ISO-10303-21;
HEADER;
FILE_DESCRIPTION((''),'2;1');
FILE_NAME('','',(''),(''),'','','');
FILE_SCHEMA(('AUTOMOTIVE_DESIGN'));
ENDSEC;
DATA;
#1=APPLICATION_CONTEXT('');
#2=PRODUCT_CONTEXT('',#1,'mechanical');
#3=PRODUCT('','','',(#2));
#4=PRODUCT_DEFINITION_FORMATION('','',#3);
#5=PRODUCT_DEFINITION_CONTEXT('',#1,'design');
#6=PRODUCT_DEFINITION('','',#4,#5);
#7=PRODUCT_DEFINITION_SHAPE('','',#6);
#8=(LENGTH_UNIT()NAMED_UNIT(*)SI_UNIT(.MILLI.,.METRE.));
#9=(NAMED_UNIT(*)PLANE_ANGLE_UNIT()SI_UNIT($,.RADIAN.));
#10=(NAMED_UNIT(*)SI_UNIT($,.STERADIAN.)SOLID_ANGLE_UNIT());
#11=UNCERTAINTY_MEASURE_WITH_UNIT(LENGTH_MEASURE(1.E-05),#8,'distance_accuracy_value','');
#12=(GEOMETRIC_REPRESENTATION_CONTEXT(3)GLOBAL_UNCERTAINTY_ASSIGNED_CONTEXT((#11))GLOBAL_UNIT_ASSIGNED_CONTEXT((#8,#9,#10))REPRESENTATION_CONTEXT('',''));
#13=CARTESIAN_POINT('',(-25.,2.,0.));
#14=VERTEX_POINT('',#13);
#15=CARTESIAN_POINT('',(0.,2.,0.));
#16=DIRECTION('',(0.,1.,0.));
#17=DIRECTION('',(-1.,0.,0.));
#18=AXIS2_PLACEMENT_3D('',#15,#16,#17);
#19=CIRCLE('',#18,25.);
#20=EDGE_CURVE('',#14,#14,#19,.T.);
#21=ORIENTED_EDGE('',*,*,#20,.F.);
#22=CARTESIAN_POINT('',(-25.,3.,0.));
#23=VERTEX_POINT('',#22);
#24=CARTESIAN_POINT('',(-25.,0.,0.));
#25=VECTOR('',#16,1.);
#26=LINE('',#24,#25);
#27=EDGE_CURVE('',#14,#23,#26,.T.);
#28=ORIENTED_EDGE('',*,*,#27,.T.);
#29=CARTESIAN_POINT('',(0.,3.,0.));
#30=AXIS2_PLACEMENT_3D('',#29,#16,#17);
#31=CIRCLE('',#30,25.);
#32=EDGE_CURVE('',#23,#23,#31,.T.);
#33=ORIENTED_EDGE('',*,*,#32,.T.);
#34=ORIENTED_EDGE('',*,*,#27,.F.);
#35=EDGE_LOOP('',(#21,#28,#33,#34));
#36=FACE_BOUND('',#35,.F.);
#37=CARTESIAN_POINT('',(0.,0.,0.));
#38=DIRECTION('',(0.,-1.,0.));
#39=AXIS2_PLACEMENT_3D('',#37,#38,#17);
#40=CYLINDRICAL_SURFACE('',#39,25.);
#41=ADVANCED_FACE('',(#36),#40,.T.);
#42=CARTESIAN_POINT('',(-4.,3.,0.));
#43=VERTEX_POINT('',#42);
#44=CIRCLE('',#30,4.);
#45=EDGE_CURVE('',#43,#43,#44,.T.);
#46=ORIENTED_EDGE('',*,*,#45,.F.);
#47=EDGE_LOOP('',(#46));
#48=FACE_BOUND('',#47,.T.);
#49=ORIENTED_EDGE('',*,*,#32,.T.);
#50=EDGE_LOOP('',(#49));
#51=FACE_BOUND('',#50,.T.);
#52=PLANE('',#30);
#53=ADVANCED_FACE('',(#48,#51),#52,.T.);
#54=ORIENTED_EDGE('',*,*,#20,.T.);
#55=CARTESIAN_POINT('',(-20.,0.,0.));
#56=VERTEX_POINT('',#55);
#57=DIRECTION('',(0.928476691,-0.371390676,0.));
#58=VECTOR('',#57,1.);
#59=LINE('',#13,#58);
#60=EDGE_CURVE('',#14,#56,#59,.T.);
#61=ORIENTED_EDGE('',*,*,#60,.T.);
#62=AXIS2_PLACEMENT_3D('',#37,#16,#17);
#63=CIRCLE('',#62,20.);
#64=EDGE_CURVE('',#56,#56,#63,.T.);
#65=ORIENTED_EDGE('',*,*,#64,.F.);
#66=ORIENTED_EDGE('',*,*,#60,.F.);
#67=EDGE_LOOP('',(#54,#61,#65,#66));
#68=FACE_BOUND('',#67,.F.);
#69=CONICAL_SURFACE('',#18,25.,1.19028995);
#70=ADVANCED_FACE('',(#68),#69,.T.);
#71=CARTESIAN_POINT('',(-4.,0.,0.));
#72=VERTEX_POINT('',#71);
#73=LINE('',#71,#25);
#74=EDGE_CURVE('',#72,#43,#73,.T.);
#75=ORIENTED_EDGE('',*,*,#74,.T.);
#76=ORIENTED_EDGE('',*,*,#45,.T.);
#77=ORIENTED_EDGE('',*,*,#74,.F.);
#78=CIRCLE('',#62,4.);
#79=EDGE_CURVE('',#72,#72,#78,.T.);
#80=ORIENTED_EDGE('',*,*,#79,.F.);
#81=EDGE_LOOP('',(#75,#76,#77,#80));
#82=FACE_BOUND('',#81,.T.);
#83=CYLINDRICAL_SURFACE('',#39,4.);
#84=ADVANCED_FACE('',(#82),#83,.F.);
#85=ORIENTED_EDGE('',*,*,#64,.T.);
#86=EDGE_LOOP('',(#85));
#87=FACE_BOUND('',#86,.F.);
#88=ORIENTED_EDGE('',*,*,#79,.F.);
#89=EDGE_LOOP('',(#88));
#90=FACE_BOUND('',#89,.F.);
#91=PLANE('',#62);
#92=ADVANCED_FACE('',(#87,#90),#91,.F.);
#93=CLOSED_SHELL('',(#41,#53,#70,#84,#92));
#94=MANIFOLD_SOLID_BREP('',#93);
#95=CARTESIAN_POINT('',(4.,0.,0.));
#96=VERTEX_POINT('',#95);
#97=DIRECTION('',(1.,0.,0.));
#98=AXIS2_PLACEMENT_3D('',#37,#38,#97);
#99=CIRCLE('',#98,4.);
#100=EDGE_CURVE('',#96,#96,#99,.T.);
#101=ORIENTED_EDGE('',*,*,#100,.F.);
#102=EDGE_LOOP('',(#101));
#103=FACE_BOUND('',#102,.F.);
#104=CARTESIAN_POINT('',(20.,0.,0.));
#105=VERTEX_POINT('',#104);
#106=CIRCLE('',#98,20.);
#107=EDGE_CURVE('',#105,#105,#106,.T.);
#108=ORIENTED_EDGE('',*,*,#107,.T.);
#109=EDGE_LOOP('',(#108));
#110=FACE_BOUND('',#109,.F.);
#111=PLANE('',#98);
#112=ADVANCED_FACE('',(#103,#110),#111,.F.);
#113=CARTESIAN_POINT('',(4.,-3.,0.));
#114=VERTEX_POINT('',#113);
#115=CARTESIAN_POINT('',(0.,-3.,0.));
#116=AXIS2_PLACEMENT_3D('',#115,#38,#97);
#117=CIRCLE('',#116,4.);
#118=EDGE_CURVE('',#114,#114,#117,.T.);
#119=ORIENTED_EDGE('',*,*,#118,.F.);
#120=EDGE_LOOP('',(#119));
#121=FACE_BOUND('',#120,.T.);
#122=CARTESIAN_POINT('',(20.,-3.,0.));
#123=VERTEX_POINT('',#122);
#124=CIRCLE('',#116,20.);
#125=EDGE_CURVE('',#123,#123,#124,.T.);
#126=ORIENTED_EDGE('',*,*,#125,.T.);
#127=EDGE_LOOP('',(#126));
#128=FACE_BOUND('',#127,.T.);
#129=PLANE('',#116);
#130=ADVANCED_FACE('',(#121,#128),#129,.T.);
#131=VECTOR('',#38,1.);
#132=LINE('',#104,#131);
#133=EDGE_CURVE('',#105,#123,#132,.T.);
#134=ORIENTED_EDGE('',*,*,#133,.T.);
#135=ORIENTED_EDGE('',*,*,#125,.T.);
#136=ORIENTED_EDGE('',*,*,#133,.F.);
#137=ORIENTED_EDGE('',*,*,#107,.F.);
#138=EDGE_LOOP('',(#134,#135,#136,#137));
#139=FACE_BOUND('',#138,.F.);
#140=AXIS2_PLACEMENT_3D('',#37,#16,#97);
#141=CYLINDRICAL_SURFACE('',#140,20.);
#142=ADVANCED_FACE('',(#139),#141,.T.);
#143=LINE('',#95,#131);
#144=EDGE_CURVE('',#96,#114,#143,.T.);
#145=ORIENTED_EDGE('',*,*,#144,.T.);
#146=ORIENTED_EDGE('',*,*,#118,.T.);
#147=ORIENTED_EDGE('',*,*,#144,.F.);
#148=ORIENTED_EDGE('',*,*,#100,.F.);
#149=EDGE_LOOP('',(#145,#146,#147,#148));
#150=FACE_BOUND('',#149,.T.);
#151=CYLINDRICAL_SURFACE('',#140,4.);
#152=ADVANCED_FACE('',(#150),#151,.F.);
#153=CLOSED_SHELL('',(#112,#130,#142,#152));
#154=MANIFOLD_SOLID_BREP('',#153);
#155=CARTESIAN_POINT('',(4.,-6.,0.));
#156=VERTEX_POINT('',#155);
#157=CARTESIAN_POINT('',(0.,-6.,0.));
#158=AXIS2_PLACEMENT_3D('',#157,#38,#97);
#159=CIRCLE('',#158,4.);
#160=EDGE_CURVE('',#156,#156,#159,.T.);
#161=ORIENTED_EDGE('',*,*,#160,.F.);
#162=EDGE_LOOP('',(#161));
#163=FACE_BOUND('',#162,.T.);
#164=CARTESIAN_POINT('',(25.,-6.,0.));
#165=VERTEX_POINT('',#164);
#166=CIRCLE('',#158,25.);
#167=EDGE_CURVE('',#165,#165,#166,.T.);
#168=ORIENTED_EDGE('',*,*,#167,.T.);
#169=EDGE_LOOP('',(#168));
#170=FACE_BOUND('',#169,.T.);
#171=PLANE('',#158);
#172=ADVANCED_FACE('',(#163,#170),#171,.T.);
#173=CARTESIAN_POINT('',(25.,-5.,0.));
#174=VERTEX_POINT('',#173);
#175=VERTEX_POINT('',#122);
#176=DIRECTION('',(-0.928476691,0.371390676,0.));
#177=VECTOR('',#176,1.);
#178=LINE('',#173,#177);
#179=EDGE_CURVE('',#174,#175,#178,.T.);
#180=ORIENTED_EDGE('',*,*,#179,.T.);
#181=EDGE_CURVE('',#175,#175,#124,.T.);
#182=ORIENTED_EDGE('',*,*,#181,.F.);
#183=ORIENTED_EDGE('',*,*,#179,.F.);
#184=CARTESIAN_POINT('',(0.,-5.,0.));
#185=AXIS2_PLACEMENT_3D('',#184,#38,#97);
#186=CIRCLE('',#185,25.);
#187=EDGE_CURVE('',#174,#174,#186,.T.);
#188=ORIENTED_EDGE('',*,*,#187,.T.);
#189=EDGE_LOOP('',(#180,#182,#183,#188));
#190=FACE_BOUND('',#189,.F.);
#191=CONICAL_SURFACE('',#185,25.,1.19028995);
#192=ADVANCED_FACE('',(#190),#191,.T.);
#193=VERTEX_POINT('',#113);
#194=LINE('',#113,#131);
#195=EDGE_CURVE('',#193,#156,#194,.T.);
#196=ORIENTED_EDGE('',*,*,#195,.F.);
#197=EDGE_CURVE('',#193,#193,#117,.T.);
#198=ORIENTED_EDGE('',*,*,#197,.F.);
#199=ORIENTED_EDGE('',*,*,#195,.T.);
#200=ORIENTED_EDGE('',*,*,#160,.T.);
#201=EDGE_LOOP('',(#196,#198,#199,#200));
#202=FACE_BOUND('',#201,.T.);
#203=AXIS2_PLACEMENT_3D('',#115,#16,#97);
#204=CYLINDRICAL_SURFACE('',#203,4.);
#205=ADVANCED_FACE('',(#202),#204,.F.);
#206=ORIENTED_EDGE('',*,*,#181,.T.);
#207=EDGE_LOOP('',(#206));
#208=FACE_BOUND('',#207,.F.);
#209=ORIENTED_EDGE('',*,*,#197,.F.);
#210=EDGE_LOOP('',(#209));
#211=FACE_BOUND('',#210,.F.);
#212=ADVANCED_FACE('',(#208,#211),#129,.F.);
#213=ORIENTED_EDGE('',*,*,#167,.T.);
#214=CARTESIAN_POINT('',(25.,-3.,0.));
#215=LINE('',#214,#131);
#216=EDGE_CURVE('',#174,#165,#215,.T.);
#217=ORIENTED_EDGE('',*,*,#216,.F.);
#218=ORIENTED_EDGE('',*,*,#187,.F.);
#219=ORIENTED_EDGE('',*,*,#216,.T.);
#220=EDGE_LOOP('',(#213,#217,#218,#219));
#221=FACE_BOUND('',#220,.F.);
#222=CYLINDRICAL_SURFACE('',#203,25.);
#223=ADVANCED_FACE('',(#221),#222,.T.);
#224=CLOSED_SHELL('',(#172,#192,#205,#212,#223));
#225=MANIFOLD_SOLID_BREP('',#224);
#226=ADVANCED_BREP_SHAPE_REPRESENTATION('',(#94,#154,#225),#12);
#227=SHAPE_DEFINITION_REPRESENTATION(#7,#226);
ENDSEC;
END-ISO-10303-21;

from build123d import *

# Parameters (mm, degrees)
F0_R       = 20
F0_R_2     = 4
F1_DEPTH   = 3
F2_R       = 25
F2_R_2     = 20
F2_R_3     = 4
F3_DEPTH   = 3
F4_R       = 25
F4_R_2     = 20
F4_R_3     = 4
F5_DEPTH   = 3
F6_SIZE2   = 5
F6_SIZE    = 2
F6_2_SIZE2 = 5
F6_2_SIZE  = 2


with BuildPart() as f1:
    # F0 (on Front) → F1 (new body)
    with BuildSketch(Plane.XZ):
        Circle(F0_R)
        Circle(F0_R_2, mode=Mode.SUBTRACT)
    extrude(amount=F1_DEPTH)


with BuildPart() as f3:
    # F2 (on face) → F3 (new body)
    with BuildSketch(Plane(origin=(0, 0, 0), x_dir=(-1, 0, 0), z_dir=(0, 1, 0))):
        Circle(F2_R)
        Circle(F2_R_2, mode=Mode.SUBTRACT)
        Circle(F2_R_2)
        Circle(F2_R_3, mode=Mode.SUBTRACT)
    extrude(amount=F3_DEPTH)

    # F6
    f6_edges = [f3.edges().sort_by_distance(p)[0] for p in [
        (25, 0, 0),
    ]]
    f6_side = f3.faces().sort_by_distance((25, 1.5, 0))[0]
    chamfer(f6_edges, length=F6_SIZE, length2=F6_SIZE2, reference=f6_side)


with BuildPart() as f5:
    # F4 (on face) → F5 (new body)
    with BuildSketch(Plane.XZ.offset(3)):
        Circle(F4_R)
        Circle(F4_R_2, mode=Mode.SUBTRACT)
        Circle(F4_R_2)
        Circle(F4_R_3, mode=Mode.SUBTRACT)
    extrude(amount=F5_DEPTH)

    # F6#2
    f6_2_edges = [f5.edges().sort_by_distance(p)[0] for p in [
        (-25, -3, 0),
    ]]
    f6_2_side = f5.faces().sort_by_distance((-25, -4.5, 0))[0]
    chamfer(f6_2_edges, length=F6_2_SIZE, length2=F6_2_SIZE2, reference=f6_2_side)


solid = Compound([f1.part, f3.part, f5.part])
